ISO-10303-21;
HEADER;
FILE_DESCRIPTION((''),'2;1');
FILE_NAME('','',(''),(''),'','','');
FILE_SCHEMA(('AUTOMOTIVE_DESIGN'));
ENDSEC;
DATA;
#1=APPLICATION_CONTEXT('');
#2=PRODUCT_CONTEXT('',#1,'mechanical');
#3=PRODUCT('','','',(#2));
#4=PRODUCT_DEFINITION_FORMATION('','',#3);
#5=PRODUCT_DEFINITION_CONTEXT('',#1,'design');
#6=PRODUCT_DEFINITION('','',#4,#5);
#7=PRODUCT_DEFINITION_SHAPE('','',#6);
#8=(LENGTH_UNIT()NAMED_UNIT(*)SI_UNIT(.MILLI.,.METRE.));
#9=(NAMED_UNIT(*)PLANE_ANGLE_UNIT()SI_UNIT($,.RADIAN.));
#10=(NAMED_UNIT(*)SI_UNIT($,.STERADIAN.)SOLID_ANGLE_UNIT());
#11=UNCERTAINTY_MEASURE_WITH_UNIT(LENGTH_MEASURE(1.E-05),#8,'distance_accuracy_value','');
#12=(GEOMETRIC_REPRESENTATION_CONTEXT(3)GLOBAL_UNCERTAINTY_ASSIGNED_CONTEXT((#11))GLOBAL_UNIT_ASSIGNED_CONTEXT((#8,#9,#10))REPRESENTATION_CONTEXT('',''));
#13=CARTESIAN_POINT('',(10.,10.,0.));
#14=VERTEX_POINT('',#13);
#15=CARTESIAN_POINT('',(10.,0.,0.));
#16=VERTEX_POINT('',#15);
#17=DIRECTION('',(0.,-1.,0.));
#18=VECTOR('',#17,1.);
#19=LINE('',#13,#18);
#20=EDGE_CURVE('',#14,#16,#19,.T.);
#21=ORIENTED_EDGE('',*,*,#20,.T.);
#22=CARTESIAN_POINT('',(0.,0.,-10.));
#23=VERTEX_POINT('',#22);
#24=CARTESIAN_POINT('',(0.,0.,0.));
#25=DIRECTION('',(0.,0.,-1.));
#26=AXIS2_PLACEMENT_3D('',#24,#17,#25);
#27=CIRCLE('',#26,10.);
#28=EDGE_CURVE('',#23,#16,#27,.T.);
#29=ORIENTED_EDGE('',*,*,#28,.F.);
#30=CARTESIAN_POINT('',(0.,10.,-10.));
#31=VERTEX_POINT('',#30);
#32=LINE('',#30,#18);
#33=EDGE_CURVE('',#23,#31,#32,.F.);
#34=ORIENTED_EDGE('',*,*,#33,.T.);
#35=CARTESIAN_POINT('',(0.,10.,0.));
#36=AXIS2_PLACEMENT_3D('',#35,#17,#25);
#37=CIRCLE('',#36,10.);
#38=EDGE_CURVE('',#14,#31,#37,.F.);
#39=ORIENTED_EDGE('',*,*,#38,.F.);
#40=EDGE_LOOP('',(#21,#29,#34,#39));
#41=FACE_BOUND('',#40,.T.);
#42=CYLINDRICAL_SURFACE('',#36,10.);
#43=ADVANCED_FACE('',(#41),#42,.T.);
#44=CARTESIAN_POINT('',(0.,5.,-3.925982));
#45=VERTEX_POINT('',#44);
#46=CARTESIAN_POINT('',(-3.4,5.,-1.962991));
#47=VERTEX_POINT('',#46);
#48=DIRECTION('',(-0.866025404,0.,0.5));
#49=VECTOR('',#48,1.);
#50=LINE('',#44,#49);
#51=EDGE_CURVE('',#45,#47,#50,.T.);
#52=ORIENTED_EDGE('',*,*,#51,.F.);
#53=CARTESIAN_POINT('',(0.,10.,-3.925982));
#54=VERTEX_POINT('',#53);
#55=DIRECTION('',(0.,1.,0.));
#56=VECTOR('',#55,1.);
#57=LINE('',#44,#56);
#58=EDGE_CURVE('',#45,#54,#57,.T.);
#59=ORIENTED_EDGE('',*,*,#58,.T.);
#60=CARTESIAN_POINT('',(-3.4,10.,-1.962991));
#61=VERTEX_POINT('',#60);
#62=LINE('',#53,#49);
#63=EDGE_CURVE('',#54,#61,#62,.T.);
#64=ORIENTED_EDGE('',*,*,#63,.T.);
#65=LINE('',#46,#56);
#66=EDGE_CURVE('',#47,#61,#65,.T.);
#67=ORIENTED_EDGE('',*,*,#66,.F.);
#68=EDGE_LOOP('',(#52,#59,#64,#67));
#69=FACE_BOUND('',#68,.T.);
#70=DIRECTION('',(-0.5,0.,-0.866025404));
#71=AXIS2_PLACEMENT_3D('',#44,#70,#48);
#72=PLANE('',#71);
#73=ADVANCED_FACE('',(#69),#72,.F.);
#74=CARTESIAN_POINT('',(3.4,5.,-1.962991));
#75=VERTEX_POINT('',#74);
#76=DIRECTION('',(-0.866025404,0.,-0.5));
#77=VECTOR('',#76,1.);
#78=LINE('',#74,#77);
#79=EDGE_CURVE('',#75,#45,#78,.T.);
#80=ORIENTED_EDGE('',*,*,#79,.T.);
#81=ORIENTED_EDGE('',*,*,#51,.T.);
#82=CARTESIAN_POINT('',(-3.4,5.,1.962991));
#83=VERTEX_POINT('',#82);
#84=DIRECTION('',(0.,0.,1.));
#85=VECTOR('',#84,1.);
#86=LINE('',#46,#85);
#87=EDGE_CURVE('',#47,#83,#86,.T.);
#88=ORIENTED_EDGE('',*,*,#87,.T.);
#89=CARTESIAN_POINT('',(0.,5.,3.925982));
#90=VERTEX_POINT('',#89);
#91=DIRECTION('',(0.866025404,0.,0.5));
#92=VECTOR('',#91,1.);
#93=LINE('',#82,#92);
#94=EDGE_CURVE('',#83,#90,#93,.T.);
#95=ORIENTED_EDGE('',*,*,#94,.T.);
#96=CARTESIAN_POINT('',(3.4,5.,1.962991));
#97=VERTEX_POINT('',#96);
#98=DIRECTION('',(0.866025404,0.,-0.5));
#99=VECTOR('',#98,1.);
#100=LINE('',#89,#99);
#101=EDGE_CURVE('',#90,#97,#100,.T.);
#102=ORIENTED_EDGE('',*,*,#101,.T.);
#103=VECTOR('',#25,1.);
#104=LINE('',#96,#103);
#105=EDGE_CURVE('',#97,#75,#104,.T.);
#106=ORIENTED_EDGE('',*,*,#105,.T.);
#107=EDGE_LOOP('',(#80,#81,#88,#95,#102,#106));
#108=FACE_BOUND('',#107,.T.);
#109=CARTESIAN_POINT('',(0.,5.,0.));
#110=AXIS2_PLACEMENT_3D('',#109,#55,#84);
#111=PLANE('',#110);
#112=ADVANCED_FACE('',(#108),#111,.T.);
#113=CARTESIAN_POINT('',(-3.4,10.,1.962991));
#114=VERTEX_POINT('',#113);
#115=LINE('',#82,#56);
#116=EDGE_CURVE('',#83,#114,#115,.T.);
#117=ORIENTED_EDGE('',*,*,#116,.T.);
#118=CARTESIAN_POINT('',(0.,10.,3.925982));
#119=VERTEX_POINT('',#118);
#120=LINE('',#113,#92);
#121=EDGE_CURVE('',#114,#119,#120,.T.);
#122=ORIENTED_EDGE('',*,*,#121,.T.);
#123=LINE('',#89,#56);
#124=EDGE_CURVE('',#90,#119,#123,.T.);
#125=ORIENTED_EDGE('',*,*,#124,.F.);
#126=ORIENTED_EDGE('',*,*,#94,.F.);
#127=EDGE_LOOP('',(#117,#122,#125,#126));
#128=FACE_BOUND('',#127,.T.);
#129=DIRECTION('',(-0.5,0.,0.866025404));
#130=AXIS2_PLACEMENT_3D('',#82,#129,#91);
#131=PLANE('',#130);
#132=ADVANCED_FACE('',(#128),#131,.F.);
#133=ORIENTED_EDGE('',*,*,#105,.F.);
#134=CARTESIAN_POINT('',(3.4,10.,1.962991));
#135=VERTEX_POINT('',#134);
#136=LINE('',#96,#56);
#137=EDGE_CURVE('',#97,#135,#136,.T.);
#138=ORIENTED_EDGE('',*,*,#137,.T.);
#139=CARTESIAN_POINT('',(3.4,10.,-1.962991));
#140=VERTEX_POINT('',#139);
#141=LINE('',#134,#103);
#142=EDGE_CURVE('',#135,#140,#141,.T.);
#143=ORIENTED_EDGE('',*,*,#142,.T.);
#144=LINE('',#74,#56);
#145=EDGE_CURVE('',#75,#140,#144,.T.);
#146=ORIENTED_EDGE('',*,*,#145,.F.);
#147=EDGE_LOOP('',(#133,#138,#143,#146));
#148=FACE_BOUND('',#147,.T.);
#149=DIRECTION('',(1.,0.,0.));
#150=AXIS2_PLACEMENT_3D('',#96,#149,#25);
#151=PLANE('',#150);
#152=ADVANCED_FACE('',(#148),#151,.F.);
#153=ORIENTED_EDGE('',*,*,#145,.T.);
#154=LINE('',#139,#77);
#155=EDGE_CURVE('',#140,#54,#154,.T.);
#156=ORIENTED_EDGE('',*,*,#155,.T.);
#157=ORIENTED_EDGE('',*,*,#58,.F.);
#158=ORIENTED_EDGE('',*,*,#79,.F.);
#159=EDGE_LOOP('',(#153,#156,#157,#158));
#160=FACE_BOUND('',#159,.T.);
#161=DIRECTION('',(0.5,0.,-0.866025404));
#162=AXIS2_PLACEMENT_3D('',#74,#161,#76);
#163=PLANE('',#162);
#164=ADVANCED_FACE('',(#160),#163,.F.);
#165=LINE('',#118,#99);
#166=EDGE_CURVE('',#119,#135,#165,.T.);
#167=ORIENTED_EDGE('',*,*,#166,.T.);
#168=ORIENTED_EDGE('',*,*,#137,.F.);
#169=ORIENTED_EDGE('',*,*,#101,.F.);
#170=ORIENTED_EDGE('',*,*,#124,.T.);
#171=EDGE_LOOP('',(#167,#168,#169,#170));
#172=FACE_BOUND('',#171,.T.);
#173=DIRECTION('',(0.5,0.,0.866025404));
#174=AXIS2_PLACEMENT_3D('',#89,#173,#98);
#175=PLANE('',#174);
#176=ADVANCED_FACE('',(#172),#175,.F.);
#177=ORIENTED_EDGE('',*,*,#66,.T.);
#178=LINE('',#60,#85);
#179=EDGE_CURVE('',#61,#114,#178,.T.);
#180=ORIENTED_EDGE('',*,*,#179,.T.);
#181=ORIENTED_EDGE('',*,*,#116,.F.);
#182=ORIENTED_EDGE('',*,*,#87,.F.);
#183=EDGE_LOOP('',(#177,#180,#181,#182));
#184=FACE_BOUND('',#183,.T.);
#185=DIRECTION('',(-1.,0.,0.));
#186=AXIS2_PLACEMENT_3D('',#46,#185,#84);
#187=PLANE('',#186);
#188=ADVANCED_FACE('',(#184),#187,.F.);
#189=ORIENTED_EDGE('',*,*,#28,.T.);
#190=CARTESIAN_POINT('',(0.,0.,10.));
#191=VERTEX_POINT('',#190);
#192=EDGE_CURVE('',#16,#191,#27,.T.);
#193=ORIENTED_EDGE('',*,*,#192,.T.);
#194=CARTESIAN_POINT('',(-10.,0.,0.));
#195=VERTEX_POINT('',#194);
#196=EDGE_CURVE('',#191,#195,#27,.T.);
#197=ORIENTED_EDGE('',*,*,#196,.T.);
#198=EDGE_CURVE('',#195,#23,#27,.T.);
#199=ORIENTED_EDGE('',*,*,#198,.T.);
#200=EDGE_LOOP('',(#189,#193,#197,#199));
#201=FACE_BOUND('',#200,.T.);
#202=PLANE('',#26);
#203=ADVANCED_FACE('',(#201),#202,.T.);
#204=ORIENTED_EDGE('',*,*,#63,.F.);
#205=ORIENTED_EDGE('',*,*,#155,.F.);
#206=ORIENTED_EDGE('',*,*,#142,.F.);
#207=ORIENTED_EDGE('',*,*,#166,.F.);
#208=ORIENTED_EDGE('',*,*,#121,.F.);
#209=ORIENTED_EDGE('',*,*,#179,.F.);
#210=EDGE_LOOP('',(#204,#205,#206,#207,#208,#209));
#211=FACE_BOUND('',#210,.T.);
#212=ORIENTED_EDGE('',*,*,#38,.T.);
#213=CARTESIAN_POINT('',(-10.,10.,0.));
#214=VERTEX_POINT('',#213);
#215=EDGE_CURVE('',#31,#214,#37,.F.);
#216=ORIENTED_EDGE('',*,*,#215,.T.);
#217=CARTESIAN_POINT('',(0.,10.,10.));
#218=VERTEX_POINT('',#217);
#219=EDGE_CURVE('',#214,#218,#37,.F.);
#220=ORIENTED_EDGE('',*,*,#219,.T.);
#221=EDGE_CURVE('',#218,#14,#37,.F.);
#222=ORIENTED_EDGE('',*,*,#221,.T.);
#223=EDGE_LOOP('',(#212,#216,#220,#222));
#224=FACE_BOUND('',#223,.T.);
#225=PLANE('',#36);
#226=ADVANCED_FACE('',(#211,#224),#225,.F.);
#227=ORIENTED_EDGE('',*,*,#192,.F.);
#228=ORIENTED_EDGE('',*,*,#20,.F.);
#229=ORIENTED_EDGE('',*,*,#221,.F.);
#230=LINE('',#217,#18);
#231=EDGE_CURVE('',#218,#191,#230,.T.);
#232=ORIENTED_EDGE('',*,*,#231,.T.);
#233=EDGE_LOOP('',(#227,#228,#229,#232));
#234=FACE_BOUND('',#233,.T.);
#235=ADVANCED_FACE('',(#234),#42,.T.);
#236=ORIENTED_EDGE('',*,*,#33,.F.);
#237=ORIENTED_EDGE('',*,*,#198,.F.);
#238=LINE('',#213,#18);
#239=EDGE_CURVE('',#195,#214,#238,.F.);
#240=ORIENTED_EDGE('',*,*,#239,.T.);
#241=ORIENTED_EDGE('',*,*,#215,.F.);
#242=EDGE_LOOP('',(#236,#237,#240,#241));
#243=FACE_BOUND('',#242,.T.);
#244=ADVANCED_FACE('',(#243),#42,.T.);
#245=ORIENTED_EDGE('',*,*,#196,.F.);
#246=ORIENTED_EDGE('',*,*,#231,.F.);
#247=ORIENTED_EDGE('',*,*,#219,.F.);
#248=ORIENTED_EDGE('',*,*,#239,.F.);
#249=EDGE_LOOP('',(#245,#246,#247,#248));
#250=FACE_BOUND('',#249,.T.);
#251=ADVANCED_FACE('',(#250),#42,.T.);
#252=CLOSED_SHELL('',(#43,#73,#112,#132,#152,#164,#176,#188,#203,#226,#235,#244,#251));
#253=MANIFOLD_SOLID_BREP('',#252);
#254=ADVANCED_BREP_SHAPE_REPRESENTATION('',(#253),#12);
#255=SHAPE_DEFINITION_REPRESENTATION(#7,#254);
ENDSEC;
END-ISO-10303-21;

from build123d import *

# Parameters (mm, degrees)
SKETCH1_W           = 20
SKETCH1_H           = 20
BOSS_EXTRUDE1_DEPTH = 10
CUT_EXTRUDE1_DEPTH  = 5
FILLET1_R           = 10


with BuildPart() as part:
    # Sketch1 → Boss-Extrude1 (new body)
    with BuildSketch(Plane(origin=(0, 0, 0), x_dir=(1, 0, 0), z_dir=(0, 1, 0))):
        Rectangle(SKETCH1_W, SKETCH1_H)
    extrude(amount=BOSS_EXTRUDE1_DEPTH)

    # Sketch2 → Cut-Extrude1 (cut)
    with BuildSketch(Plane(origin=(0, 10, 0), x_dir=(1, 0, 0), z_dir=(0, 1, 0))):
        Polygon((0, 3.92598183), (-3.4, 1.962990915), (-3.4, -1.962990915), (0, -3.92598183), (3.4, -1.962990915), (3.4, 1.962990915), align=None)
    extrude(amount=-CUT_EXTRUDE1_DEPTH, mode=Mode.SUBTRACT)

    # Fillet1
    fillet1_edges = [part.edges().sort_by_distance(p)[0] for p in [
        (10, 5, -10),
        (10, 5, 10),
        (-10, 5, -10),
        (-10, 5, 10),
    ]]
    fillet(fillet1_edges, radius=FILLET1_R - 0.0001)  # a hair under: the kernel refuses the full size


solid = part.part
